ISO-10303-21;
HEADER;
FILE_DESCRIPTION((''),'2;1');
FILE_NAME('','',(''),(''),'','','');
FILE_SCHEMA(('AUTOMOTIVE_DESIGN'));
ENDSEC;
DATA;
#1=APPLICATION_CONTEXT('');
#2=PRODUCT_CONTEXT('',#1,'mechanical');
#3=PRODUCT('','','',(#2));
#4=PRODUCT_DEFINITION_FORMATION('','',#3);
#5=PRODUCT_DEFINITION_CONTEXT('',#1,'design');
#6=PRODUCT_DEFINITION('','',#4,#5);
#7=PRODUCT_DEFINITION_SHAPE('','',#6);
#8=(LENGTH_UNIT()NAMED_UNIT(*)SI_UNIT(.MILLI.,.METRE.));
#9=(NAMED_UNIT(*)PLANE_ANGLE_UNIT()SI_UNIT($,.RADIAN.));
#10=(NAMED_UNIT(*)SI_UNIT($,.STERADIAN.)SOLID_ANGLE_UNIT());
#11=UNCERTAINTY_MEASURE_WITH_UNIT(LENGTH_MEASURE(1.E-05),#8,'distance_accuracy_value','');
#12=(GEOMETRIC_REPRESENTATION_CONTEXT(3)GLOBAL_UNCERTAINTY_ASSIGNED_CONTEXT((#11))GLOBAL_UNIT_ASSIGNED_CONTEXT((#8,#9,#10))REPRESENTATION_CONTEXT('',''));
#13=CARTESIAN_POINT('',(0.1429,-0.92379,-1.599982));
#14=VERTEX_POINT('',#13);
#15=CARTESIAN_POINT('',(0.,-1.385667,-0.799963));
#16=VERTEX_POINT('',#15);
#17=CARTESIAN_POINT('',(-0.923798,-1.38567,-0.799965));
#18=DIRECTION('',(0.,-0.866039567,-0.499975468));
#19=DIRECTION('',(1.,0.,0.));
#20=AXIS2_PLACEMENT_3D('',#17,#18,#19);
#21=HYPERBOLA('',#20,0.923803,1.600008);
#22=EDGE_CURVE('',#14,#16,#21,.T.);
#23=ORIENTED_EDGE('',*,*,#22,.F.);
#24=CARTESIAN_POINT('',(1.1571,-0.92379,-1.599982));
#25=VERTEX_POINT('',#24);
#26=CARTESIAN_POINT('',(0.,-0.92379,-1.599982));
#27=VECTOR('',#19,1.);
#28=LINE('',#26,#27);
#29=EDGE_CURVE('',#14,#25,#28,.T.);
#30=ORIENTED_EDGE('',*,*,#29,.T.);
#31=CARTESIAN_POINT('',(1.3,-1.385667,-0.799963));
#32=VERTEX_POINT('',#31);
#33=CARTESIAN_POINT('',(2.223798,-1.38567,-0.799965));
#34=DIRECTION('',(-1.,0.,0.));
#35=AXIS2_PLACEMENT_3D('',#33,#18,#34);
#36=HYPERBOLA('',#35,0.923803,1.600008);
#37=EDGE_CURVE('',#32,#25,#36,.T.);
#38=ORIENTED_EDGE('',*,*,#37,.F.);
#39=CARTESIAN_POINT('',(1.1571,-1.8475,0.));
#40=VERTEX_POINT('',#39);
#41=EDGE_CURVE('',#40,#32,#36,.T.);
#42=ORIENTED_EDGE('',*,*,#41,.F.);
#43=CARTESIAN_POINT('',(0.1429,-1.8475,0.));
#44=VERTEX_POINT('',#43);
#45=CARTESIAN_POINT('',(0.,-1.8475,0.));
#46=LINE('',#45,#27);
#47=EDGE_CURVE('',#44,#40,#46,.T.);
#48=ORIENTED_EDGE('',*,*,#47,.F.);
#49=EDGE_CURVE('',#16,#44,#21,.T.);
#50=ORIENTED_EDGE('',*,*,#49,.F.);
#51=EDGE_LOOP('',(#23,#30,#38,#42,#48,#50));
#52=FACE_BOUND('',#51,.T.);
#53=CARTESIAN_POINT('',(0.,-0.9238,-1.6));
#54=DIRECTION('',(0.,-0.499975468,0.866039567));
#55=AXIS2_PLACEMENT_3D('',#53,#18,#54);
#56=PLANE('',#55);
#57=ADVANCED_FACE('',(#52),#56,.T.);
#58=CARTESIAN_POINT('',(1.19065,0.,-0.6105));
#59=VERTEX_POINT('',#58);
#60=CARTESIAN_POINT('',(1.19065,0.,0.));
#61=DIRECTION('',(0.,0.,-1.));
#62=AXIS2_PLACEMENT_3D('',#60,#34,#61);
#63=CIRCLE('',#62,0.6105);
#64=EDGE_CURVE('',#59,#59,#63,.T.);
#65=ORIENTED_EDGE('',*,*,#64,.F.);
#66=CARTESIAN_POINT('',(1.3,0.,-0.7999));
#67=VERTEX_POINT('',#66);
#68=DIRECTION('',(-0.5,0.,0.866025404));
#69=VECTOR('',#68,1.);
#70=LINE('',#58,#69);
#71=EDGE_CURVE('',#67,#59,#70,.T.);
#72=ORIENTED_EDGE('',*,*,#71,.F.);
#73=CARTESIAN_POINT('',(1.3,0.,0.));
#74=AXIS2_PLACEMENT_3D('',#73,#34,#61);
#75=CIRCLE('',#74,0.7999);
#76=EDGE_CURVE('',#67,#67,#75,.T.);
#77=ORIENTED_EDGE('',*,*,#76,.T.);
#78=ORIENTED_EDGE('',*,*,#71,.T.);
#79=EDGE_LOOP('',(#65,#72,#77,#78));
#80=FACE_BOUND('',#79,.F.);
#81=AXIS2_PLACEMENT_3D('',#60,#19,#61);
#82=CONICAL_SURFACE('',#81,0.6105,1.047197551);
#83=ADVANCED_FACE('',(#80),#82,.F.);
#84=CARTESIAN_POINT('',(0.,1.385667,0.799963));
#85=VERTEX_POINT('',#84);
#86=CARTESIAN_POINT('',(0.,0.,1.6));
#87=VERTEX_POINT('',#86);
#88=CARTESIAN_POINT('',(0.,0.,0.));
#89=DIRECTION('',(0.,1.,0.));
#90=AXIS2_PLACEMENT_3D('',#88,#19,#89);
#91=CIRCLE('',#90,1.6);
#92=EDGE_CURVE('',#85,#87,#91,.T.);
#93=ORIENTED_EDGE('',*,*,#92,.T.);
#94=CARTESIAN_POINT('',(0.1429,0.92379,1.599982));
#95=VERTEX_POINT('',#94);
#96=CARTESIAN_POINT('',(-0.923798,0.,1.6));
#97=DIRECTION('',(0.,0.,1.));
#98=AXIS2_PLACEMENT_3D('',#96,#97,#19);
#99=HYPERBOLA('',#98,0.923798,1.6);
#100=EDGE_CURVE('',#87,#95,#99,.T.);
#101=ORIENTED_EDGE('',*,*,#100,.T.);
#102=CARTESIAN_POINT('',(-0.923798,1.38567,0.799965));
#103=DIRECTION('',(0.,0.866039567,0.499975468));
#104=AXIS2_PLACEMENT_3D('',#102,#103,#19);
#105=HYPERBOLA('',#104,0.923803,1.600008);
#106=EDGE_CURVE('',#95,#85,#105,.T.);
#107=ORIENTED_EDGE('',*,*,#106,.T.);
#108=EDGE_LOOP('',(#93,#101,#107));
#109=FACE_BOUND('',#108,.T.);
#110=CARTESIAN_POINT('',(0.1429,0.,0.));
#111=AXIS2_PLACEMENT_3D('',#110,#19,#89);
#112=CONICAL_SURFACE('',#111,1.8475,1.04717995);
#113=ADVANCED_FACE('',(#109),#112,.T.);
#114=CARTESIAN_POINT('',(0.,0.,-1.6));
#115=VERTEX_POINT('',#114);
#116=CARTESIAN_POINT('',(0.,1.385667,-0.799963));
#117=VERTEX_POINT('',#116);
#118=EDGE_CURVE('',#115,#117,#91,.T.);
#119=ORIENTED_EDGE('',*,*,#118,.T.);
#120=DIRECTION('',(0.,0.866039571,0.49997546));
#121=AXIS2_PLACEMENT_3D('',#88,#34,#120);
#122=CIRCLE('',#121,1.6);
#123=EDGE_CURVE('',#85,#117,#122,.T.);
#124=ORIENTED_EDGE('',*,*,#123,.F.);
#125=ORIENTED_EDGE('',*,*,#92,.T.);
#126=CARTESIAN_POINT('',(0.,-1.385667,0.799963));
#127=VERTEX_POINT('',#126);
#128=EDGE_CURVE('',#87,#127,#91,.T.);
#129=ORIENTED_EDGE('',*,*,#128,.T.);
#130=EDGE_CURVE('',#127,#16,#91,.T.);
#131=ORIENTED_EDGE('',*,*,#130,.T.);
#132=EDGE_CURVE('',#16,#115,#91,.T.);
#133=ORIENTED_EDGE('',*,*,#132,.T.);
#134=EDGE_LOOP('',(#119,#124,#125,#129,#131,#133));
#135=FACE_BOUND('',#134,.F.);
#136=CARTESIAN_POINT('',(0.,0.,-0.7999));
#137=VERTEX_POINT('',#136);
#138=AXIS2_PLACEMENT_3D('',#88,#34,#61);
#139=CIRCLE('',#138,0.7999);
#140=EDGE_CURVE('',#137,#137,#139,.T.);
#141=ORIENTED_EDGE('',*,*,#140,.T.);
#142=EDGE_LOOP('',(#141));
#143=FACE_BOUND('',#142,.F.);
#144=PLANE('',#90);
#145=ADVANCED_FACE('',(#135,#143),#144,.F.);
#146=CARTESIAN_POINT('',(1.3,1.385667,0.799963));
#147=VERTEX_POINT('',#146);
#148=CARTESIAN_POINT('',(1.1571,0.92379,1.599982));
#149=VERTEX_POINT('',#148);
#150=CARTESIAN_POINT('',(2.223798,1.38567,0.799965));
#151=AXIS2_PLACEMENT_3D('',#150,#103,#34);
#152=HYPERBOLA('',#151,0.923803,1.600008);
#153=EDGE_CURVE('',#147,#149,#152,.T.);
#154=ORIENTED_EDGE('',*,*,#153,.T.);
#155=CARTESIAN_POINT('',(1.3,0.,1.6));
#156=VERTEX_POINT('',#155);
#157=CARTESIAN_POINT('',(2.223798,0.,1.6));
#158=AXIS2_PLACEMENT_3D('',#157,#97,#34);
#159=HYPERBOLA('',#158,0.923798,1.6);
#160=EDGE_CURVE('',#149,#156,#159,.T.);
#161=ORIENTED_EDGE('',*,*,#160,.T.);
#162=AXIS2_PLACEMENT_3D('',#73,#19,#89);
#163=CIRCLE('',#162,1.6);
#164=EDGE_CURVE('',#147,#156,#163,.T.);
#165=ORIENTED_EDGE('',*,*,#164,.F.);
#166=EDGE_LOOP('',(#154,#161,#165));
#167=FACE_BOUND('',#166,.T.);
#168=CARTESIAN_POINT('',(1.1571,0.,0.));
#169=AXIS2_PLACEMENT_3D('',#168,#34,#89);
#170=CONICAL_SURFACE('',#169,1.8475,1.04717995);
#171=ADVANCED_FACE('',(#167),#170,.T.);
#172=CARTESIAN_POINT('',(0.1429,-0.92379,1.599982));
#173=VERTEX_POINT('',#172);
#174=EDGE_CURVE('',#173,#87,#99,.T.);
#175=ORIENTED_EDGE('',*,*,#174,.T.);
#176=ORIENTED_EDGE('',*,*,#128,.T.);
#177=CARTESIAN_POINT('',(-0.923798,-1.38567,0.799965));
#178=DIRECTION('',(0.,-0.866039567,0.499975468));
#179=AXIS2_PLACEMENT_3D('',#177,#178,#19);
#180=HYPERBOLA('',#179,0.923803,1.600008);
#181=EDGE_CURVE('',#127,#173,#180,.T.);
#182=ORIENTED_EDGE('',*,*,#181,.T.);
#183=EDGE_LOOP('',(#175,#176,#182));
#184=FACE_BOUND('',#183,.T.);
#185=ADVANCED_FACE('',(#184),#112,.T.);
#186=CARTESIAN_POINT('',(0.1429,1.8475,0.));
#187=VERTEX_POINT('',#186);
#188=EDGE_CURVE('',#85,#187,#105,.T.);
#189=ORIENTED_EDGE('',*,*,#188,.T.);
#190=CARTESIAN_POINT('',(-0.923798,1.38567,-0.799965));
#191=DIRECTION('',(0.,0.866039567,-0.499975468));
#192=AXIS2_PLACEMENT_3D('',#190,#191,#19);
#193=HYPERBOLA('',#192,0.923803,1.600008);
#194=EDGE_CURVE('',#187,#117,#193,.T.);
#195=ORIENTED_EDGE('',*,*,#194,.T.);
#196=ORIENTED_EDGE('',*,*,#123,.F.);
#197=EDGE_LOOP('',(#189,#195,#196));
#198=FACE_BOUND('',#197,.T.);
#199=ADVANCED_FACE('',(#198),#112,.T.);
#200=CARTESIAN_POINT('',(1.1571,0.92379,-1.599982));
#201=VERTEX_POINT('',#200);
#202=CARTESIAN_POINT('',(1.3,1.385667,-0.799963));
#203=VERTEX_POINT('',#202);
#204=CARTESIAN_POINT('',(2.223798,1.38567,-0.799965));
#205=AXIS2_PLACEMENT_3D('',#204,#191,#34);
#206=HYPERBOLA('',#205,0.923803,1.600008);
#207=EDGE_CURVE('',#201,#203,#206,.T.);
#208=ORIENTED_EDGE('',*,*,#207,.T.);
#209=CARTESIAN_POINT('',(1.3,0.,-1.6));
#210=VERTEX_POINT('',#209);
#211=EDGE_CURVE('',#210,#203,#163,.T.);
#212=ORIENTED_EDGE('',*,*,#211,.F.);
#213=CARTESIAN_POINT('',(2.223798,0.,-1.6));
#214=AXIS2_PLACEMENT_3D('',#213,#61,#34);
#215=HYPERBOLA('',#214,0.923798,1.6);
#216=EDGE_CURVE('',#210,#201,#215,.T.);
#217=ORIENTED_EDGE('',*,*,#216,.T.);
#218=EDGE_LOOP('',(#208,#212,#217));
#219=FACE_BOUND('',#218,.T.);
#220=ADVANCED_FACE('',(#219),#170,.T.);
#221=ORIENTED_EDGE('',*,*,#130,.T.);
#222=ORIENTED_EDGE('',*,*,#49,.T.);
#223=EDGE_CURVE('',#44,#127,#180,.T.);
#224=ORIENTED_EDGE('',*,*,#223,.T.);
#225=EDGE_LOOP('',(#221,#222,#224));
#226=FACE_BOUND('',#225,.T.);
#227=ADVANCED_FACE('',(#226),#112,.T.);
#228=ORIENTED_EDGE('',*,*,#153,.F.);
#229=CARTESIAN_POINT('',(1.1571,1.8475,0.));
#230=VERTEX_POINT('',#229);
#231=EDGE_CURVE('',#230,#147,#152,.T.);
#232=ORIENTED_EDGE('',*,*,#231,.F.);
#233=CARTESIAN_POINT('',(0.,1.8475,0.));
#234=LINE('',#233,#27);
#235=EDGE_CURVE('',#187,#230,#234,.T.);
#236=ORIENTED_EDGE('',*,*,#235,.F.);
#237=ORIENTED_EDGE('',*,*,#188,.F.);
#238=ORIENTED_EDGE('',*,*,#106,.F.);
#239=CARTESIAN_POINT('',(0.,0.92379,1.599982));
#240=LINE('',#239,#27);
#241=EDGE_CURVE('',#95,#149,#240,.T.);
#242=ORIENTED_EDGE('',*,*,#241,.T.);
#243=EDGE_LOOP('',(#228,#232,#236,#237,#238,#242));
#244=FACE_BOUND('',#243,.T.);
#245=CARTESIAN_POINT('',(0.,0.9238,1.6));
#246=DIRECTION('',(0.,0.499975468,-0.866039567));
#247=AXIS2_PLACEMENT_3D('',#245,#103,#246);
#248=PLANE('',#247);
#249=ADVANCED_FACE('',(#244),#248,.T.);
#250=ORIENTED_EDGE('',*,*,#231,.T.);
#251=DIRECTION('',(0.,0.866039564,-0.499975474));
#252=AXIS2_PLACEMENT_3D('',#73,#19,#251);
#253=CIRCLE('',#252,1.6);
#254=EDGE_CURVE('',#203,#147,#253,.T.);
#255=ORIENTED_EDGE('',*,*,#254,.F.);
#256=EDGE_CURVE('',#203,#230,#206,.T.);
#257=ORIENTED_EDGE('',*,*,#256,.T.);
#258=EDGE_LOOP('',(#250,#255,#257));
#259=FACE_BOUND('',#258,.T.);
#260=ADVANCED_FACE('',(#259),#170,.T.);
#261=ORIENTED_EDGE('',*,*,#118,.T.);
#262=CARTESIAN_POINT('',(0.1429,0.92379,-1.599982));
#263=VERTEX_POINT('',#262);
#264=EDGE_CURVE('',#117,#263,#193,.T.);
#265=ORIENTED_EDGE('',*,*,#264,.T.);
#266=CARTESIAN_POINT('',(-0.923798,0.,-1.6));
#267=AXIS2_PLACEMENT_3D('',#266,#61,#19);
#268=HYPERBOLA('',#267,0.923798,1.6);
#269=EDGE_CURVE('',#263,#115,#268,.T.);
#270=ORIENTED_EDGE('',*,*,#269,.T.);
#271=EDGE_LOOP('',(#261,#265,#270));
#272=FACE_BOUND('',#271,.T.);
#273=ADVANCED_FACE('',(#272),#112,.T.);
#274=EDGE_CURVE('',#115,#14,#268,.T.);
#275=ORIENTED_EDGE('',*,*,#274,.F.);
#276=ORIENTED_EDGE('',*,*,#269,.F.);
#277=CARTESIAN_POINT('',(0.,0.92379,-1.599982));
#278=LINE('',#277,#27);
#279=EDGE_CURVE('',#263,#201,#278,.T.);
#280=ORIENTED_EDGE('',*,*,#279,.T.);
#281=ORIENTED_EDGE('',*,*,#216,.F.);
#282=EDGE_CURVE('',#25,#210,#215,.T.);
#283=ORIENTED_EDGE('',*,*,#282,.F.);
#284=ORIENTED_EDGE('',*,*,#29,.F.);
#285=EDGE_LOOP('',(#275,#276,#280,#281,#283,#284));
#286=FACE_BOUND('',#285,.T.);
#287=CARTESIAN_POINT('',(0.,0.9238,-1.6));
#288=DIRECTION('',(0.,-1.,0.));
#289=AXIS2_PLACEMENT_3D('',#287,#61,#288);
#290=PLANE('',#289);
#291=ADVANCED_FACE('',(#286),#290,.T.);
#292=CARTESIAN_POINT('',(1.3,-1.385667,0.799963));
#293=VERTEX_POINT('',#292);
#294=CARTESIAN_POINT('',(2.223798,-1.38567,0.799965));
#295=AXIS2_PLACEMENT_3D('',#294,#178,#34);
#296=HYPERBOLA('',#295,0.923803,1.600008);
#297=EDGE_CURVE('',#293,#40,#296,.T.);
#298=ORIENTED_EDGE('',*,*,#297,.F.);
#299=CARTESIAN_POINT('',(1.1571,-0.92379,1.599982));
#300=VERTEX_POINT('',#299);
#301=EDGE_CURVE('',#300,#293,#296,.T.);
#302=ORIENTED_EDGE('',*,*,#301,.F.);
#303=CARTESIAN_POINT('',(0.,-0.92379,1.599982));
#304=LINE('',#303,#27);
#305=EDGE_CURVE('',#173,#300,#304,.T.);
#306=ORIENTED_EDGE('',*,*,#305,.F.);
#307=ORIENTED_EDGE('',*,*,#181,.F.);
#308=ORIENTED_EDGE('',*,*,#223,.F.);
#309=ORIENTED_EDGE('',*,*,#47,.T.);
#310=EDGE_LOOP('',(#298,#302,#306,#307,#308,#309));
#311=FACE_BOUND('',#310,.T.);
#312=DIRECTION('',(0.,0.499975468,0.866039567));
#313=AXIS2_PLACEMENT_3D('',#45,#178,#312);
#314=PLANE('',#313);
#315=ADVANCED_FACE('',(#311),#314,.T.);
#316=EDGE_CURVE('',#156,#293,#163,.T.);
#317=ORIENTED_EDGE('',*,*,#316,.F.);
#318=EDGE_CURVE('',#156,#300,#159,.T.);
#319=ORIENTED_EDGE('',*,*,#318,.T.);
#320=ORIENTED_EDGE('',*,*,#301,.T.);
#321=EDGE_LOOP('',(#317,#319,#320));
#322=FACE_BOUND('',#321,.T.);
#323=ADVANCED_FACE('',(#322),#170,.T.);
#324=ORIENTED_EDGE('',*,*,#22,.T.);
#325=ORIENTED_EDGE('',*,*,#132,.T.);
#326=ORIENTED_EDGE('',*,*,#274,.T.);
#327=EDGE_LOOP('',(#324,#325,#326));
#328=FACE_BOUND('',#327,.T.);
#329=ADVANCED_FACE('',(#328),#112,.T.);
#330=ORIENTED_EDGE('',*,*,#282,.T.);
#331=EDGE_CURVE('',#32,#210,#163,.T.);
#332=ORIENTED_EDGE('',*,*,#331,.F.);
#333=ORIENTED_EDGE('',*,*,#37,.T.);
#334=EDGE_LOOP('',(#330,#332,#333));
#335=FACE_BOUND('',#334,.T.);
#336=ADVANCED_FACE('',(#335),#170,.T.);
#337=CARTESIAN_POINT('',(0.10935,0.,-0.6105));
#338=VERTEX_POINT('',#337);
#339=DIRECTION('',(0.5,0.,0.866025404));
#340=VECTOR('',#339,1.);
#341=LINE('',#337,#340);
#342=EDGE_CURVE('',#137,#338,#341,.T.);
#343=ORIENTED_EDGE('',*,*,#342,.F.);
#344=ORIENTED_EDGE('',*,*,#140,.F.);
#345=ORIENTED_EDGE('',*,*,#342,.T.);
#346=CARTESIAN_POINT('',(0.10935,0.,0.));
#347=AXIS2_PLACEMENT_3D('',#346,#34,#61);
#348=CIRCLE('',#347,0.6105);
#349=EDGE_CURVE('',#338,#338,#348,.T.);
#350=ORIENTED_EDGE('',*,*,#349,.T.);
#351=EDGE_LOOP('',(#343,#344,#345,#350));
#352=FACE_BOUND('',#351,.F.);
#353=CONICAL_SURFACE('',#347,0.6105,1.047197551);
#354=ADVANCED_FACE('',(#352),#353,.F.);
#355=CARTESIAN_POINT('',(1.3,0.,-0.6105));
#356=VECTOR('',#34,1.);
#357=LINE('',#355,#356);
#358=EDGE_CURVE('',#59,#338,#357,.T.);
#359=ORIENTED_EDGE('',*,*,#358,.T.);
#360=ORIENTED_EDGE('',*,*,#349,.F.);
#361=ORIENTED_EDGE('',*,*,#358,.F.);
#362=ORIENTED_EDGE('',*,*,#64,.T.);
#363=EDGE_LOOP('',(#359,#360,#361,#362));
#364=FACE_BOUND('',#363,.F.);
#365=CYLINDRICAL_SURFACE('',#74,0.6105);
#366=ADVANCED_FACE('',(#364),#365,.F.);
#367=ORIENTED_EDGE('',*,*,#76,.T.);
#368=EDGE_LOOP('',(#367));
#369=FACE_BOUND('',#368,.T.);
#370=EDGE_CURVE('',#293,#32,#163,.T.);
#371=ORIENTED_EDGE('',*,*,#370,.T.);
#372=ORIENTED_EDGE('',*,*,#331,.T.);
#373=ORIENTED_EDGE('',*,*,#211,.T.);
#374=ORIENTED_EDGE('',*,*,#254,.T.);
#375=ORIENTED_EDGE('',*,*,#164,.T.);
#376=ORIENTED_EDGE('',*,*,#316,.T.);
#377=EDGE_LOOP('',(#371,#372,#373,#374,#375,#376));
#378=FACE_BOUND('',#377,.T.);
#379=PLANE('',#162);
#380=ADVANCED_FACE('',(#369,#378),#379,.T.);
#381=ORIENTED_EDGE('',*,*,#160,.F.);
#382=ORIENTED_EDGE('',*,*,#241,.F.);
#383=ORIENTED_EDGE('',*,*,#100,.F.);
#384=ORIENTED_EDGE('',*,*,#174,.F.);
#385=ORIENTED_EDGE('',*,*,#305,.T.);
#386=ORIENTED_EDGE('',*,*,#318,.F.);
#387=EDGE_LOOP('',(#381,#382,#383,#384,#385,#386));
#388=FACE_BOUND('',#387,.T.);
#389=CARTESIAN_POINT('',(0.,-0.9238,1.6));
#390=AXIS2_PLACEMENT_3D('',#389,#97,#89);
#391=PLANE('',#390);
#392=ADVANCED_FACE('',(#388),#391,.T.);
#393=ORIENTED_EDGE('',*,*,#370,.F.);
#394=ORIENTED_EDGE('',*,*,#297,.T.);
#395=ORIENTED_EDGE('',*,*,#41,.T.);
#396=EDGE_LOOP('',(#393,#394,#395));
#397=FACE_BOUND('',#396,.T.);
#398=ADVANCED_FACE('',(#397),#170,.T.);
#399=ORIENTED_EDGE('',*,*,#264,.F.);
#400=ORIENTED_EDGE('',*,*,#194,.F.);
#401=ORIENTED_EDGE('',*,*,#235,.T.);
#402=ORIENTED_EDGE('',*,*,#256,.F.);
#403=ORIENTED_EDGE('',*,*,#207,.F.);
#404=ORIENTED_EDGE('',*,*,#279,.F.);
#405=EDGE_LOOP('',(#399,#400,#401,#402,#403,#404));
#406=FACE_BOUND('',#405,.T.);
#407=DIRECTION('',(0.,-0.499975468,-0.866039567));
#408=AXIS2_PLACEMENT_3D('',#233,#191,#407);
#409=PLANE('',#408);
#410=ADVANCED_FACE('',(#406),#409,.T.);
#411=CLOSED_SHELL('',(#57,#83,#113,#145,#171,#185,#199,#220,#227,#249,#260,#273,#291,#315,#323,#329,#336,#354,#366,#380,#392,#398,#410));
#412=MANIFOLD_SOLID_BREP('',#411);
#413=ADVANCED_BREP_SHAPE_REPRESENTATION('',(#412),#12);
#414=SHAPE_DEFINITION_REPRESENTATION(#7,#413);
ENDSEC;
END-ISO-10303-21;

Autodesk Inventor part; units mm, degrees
ref_plane "YZ Plane" through (0, 0, 0) normal (1, 0, 0) x (0, 1, 0)
ref_plane "XZ Plane" through (0, 0, 0) normal (0, 1, 0) x (-1, 0, 0)
sketch "Эскиз1" plane through (0, 0, 0) normal (1, 0, 0) x (0, 1, 0)
  line L0 (-1.8475, 0) -> (-0.9238, 1.6)
  line L1 (-0.9238, 1.6) -> (0.9238, 1.6)
  line L2 (0.9238, 1.6) -> (1.8475, 0)
  line L3 (1.8475, 0) -> (0.9238, -1.6)
  line L4 (0.9238, -1.6) -> (-0.9238, -1.6)
  line L5 (-0.9238, -1.6) -> (-1.8475, 0)
  point P0 (0, 0)
  point P1 (0, 0)
  dimension "d0" = 3.695
extrude "Базовый элемент" add sketch "Эскиз1" along normal blind 1.3
sketch "Эскиз2" plane through (0, 0, 0) normal (0, 0, 1) x (1, 0, 0)
  line L0 (0, 0.9238) -> (0, 1.8475) projected
  line L1 (0, 1.8475) -> (1.3, 1.8475) projected
  line L2 (1.3, 0.9238) -> (1.3, 1.8475) projected
  line L3 (-0.26, 0) -> (1.56, 0) projected
  line L4 (0.1429, 1.8475) -> (0, 1.6)
  line L5 (1.1571, 1.8475) -> (1.3, 1.6)
  dimension "d3" = 30
  dimension "d4" = 30
  dimension "d5" = 3.2
  dimension "d6" = 3.2
revolve "Фаска1" cut sketch "Эскиз2" angle 360 about axis through (-10, 0, 0) along (1, 0, 0)
sketch "Эскиз3" plane through (1.3, 0, 0) normal (1, 0, 0) x (0, 0, -1)
  arc A0 (-0.8, -1.3856) -> (0.8, -1.3856) centre (0, 0) ccw projected
hole "Резьба" at (1.3, 0, 0) direction (-1, 0, 0) diameter 1.221 end through all thread size "M1.6x0.35" class "6H" standard "ISO Metric profile"
chamfer "Фаска2" distance 0.1894 angle 30 1 edges at (1.3, 0, 0.6105) measured on face at (1.3, 1.2628, -0.0245)
chamfer "Фаска3" distance 0.1894 angle 30 1 edges at (0, 0, 0.6105) measured on face at (0, 1.2628, -0.0245)
ref_plane "Work Plane1" through (-3.758, 0, 0) normal (0, -0.8660254, -0.5) x (1, 0, 0)
equation "\"d0\" = 1.1547 * SW"
equation "\"d1\" = KOH"
equation "\"d3\" = ANG1"
equation "\"d4\" = ANG2"
equation "\"d5\" = SW0"
equation "\"d6\" = SW01"
equation "\"d8\" = -0.5 * GD1 + 0.5 * NND"
equation "\"d40\" = -0.5 * GD1 + 0.5 * NND"
equation "\"d10\" = -0.5 * GD1 + 0.5 * NND"
equation "\"d41\" = -0.5 * GD1 + 0.5 * NND"
equation "\"ANG1\" = 30deg"
equation "\"ANG2\" = ANG1"
equation "\"NND\" = 1.6"
equation "\"KOH\" = 1.3"
equation "\"SW\" = 3.2"
equation "\"SW0\" = SW"
equation "\"SW01\" = SW"
equation "\"GUL\" = 0.541266 * PTC"
equation "\"THREADDIA\" = 1.6"
equation "\"TOA\" = 30deg"
equation "\"PTC\" = 0.35"
equation "\"E0\" = 1.155 * SW"
equation "\"GAL\" = 0.541266 * PTC"
equation "\"GD1\" = 1.221114"
properties part number "BS 3692 - M1,6" material "Сталь, мягкая"
